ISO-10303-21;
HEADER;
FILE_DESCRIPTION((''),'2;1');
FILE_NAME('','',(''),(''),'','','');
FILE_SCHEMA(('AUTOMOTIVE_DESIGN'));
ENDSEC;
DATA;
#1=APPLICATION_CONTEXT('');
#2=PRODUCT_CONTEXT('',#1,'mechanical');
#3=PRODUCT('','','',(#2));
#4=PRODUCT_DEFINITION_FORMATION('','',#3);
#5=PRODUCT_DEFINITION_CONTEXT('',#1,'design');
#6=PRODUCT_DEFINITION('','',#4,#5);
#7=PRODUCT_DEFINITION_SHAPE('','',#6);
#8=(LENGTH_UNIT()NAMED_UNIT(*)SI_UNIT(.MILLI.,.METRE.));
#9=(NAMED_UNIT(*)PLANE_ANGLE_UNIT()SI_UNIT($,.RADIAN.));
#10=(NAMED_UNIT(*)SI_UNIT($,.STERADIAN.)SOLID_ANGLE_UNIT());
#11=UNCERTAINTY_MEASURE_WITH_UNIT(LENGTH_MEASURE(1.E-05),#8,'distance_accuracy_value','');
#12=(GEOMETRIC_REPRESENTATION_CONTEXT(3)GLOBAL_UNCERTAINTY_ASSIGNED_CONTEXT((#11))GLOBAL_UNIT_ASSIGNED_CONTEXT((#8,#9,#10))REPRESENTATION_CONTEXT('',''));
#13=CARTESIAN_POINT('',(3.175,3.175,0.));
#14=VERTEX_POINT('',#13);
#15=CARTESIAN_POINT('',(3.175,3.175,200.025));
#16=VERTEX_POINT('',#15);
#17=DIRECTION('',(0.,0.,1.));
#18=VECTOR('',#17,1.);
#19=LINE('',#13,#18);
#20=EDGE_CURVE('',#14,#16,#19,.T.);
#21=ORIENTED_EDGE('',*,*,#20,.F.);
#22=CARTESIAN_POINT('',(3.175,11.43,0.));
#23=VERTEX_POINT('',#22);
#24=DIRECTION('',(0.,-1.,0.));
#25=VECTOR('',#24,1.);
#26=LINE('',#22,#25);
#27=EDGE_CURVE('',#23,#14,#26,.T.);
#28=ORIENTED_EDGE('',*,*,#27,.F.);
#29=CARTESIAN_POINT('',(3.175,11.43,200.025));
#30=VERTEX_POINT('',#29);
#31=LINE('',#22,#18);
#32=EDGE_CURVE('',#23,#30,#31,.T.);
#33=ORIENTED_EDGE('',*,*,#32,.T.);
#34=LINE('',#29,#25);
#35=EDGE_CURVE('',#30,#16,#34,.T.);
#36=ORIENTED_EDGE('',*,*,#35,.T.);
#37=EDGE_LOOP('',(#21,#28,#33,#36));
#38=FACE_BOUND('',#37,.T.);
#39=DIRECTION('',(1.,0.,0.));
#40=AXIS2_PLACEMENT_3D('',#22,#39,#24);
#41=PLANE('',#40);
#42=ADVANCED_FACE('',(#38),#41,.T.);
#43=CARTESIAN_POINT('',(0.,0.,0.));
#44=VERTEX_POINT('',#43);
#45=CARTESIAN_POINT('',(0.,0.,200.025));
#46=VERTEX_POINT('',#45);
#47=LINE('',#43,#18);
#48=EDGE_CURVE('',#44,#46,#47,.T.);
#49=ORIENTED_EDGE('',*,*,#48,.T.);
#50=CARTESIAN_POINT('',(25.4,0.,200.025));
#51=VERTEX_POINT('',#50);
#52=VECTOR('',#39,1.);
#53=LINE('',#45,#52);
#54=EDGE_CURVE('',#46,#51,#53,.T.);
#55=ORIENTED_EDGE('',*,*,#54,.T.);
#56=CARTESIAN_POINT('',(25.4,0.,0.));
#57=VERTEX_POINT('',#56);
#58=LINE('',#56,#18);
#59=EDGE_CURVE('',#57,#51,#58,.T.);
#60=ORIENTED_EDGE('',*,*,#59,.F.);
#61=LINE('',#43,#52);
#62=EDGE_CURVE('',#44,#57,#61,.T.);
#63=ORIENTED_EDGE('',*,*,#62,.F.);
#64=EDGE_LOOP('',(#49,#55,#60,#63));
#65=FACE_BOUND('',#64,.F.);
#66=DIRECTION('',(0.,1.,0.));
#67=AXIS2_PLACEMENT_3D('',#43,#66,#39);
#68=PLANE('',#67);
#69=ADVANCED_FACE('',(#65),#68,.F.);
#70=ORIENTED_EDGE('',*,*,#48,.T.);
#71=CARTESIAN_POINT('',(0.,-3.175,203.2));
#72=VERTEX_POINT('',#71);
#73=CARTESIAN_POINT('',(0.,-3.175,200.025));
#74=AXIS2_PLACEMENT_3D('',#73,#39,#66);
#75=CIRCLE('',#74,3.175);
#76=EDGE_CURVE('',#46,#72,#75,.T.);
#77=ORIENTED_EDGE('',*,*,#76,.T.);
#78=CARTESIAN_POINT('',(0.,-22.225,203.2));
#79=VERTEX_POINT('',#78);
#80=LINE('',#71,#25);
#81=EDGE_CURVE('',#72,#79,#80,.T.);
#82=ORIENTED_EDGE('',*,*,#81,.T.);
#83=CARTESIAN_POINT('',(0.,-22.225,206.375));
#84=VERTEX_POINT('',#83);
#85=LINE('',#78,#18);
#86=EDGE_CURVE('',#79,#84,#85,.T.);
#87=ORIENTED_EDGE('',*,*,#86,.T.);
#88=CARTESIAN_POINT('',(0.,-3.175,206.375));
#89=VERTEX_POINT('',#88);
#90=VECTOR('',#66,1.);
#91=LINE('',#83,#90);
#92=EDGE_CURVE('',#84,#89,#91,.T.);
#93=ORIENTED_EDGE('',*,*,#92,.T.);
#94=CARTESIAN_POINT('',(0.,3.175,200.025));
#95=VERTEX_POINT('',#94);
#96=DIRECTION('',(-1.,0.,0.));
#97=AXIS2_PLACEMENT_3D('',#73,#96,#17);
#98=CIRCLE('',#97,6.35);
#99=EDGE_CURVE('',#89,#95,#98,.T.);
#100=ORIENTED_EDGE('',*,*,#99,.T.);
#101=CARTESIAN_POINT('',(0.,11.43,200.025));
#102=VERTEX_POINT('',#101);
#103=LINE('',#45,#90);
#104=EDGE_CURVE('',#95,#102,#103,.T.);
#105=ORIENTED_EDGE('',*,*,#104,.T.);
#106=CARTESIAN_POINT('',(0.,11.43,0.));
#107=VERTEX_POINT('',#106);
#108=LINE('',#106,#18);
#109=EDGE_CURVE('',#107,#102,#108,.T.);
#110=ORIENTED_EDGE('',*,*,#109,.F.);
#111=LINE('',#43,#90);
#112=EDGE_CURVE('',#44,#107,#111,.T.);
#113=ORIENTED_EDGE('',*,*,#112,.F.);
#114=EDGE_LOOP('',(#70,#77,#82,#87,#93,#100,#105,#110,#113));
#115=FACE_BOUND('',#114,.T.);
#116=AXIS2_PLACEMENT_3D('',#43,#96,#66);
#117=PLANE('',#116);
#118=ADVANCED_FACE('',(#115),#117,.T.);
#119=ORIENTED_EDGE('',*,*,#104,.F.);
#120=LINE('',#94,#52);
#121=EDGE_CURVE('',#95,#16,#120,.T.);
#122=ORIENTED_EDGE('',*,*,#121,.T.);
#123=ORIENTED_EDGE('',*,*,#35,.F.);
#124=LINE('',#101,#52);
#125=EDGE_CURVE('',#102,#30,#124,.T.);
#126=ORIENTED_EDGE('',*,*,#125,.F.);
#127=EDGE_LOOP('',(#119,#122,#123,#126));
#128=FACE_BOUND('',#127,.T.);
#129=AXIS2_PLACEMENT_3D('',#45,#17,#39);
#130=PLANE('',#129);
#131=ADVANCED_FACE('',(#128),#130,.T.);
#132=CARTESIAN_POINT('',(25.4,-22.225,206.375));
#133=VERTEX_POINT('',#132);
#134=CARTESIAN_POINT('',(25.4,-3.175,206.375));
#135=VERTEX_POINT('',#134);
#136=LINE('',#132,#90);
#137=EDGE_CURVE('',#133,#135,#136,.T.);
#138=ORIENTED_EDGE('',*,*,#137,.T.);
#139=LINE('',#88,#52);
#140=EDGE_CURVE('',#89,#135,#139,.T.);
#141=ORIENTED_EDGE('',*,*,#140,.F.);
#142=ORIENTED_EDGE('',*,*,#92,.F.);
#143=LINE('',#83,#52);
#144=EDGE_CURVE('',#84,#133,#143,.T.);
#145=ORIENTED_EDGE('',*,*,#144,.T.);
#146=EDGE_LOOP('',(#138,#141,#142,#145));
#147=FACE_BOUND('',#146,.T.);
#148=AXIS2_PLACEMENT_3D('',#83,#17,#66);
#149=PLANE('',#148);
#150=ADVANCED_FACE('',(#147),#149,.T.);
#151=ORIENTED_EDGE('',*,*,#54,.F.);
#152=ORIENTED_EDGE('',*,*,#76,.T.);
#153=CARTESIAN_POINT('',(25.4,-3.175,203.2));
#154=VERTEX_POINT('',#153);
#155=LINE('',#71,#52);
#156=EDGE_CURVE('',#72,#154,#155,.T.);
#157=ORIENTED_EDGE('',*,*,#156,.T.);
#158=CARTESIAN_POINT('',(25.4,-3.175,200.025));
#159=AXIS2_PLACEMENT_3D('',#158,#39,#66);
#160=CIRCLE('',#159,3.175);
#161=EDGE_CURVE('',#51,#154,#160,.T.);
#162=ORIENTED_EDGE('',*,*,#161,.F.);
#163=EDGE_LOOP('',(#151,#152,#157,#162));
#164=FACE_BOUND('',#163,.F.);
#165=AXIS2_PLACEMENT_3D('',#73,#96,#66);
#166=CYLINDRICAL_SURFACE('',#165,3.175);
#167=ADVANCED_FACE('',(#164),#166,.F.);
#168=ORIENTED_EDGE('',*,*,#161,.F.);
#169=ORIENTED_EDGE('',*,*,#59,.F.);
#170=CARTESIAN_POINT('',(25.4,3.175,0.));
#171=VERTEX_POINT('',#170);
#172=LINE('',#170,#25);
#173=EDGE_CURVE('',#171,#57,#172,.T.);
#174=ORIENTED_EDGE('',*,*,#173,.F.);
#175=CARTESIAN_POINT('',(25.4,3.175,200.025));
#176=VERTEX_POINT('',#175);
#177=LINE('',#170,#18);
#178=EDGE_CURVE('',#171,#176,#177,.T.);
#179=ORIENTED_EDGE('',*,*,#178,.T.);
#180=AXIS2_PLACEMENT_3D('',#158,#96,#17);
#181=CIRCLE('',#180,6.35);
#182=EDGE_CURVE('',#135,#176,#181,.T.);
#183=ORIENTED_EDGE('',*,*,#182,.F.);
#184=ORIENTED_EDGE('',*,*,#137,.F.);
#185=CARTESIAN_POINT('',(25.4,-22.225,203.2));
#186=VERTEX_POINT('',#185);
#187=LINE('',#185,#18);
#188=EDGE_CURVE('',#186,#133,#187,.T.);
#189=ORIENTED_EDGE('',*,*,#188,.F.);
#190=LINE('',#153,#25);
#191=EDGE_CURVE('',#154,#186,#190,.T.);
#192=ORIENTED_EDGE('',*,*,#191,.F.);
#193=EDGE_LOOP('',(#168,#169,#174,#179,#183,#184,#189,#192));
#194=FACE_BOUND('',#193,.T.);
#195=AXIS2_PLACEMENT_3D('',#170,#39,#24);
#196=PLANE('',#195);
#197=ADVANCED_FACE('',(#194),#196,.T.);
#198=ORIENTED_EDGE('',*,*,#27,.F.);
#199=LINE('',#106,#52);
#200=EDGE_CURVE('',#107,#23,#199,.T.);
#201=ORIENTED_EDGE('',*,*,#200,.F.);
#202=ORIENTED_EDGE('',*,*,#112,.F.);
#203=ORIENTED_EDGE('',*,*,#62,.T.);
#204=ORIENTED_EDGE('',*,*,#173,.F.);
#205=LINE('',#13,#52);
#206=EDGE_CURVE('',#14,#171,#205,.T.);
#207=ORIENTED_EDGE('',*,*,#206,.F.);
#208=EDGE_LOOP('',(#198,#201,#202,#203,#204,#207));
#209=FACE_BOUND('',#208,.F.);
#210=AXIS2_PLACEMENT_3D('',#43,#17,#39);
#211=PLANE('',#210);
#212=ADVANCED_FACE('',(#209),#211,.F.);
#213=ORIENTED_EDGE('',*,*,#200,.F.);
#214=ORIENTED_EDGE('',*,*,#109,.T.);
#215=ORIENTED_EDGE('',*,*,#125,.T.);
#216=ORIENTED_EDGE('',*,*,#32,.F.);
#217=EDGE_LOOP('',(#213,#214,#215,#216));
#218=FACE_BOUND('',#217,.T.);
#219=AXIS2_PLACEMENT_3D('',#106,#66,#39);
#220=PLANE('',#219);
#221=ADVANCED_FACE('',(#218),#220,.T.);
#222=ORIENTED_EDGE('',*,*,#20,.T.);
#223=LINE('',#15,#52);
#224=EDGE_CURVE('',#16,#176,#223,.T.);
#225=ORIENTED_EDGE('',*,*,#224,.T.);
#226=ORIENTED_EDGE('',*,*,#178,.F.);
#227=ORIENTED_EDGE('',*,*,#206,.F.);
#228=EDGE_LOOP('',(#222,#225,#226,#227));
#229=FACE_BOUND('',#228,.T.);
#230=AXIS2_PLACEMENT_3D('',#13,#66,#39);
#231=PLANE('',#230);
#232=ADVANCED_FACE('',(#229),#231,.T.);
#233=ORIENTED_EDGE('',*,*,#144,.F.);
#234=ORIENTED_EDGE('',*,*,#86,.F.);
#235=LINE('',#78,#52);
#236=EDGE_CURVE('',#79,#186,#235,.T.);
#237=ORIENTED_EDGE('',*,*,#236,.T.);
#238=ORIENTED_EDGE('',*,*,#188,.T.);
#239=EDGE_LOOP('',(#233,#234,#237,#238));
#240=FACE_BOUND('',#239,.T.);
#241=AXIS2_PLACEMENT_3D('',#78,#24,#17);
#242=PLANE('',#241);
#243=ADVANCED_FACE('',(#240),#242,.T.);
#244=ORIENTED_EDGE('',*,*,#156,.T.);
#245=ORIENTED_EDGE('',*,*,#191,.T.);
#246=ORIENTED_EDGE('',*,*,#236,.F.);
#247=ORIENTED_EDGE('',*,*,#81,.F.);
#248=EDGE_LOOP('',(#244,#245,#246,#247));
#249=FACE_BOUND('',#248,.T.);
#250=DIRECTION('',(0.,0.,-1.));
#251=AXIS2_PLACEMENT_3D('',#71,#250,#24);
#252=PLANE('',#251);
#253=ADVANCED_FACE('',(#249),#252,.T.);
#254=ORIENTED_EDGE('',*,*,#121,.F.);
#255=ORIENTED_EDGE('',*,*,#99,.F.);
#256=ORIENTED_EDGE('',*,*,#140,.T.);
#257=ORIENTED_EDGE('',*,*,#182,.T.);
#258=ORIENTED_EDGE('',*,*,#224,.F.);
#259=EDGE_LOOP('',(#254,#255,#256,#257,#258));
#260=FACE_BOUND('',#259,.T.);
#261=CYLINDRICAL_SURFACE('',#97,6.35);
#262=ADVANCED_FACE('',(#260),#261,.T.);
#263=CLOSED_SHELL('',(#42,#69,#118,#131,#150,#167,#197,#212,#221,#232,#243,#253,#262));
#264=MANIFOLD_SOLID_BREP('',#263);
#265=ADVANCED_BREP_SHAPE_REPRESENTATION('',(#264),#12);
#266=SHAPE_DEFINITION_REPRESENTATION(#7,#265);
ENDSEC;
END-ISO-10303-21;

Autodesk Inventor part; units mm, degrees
ref_plane "YZ Plane" through (0, 0, 0) normal (1, 0, 0) x (0, 1, 0)
ref_plane "XZ Plane" through (0, 0, 0) normal (0, 1, 0) x (-1, 0, 0)
ref_plane "XY Plane" through (0, 0, 0) normal (0, 0, 1) x (1, 0, 0)
sketch "Sketch1" plane through (0, 0, 0) normal (0, 0, 1) x (1, 0, 0)
  line L0 (0, 0) -> (25.4, 0)
  line L1 (0, 0) -> (0, 11.43)
  line L2 (3.175, 11.43) -> (3.175, 3.175)
  line L3 (3.175, 3.175) -> (25.4, 3.175)
  line L4 (0, 11.43) -> (3.175, 11.43)
  line L5 (25.4, 3.175) -> (25.4, 0)
  dimension "d0" = 25.4
  dimension "d2" = 11.43
  dimension "d3" = 90
  dimension "d4" = 3.175
extrude "Extrusion1" add sketch "Sketch1" along normal blind 200.025
sketch "Sketch2" plane through (0, -3.175, 203.2) normal (0, 0, 1) x (1, 0, 0)
  line L0 (25.4, 0) -> (0, 0)
  line L1 (0, 0) -> (0, -19.05)
  line L2 (0, -19.05) -> (25.4, -19.05)
  line L3 (25.4, -19.05) -> (25.4, 0)
edge flange "Flange1" height 25.4 angle 90 thickness 3.175 bend radius 3.175 thickness toward (0, 0, 1) relief straight relief width 3.175 relief depth 1.5875 edges at (12.7, 0, 200.025) wall of the first edge with corners at (25.4, -3.175, 203.2) (0, -3.175, 203.2) (0, -22.225, 203.2) (25.4, -22.225, 203.2)
bend "Bend1"
corner "Corner1"
equation "\"d7\" = BendReliefWidth"
equation "\"d8\" = BendReliefDepth"
equation "\"d9\" = MinimumRemnant"
equation "\"d10\" = BendRadius"
equation "\"d13\" = BendRadius"
equation "\"d14\" = CornerReliefSize"
equation "\"d15\" = GapSize"
equation "\"d16\" = JacobiRadiusSize"
equation "\"BendRadius\" = Thickness"
equation "\"BendReliefWidth\" = Thickness"
equation "\"BendReliefDepth\" = 0.5 * Thickness"
equation "\"CornerReliefSize\" = 4 * Thickness"
equation "\"MinimumRemnant\" = 2 * Thickness"
equation "\"TransitionRadius\" = BendRadius"
equation "\"JacobiRadiusSize\" = Thickness"
equation "\"GapSize\" = Thickness"
equation "\"Thickness\" = 3.175"
properties part number "Bent L"
